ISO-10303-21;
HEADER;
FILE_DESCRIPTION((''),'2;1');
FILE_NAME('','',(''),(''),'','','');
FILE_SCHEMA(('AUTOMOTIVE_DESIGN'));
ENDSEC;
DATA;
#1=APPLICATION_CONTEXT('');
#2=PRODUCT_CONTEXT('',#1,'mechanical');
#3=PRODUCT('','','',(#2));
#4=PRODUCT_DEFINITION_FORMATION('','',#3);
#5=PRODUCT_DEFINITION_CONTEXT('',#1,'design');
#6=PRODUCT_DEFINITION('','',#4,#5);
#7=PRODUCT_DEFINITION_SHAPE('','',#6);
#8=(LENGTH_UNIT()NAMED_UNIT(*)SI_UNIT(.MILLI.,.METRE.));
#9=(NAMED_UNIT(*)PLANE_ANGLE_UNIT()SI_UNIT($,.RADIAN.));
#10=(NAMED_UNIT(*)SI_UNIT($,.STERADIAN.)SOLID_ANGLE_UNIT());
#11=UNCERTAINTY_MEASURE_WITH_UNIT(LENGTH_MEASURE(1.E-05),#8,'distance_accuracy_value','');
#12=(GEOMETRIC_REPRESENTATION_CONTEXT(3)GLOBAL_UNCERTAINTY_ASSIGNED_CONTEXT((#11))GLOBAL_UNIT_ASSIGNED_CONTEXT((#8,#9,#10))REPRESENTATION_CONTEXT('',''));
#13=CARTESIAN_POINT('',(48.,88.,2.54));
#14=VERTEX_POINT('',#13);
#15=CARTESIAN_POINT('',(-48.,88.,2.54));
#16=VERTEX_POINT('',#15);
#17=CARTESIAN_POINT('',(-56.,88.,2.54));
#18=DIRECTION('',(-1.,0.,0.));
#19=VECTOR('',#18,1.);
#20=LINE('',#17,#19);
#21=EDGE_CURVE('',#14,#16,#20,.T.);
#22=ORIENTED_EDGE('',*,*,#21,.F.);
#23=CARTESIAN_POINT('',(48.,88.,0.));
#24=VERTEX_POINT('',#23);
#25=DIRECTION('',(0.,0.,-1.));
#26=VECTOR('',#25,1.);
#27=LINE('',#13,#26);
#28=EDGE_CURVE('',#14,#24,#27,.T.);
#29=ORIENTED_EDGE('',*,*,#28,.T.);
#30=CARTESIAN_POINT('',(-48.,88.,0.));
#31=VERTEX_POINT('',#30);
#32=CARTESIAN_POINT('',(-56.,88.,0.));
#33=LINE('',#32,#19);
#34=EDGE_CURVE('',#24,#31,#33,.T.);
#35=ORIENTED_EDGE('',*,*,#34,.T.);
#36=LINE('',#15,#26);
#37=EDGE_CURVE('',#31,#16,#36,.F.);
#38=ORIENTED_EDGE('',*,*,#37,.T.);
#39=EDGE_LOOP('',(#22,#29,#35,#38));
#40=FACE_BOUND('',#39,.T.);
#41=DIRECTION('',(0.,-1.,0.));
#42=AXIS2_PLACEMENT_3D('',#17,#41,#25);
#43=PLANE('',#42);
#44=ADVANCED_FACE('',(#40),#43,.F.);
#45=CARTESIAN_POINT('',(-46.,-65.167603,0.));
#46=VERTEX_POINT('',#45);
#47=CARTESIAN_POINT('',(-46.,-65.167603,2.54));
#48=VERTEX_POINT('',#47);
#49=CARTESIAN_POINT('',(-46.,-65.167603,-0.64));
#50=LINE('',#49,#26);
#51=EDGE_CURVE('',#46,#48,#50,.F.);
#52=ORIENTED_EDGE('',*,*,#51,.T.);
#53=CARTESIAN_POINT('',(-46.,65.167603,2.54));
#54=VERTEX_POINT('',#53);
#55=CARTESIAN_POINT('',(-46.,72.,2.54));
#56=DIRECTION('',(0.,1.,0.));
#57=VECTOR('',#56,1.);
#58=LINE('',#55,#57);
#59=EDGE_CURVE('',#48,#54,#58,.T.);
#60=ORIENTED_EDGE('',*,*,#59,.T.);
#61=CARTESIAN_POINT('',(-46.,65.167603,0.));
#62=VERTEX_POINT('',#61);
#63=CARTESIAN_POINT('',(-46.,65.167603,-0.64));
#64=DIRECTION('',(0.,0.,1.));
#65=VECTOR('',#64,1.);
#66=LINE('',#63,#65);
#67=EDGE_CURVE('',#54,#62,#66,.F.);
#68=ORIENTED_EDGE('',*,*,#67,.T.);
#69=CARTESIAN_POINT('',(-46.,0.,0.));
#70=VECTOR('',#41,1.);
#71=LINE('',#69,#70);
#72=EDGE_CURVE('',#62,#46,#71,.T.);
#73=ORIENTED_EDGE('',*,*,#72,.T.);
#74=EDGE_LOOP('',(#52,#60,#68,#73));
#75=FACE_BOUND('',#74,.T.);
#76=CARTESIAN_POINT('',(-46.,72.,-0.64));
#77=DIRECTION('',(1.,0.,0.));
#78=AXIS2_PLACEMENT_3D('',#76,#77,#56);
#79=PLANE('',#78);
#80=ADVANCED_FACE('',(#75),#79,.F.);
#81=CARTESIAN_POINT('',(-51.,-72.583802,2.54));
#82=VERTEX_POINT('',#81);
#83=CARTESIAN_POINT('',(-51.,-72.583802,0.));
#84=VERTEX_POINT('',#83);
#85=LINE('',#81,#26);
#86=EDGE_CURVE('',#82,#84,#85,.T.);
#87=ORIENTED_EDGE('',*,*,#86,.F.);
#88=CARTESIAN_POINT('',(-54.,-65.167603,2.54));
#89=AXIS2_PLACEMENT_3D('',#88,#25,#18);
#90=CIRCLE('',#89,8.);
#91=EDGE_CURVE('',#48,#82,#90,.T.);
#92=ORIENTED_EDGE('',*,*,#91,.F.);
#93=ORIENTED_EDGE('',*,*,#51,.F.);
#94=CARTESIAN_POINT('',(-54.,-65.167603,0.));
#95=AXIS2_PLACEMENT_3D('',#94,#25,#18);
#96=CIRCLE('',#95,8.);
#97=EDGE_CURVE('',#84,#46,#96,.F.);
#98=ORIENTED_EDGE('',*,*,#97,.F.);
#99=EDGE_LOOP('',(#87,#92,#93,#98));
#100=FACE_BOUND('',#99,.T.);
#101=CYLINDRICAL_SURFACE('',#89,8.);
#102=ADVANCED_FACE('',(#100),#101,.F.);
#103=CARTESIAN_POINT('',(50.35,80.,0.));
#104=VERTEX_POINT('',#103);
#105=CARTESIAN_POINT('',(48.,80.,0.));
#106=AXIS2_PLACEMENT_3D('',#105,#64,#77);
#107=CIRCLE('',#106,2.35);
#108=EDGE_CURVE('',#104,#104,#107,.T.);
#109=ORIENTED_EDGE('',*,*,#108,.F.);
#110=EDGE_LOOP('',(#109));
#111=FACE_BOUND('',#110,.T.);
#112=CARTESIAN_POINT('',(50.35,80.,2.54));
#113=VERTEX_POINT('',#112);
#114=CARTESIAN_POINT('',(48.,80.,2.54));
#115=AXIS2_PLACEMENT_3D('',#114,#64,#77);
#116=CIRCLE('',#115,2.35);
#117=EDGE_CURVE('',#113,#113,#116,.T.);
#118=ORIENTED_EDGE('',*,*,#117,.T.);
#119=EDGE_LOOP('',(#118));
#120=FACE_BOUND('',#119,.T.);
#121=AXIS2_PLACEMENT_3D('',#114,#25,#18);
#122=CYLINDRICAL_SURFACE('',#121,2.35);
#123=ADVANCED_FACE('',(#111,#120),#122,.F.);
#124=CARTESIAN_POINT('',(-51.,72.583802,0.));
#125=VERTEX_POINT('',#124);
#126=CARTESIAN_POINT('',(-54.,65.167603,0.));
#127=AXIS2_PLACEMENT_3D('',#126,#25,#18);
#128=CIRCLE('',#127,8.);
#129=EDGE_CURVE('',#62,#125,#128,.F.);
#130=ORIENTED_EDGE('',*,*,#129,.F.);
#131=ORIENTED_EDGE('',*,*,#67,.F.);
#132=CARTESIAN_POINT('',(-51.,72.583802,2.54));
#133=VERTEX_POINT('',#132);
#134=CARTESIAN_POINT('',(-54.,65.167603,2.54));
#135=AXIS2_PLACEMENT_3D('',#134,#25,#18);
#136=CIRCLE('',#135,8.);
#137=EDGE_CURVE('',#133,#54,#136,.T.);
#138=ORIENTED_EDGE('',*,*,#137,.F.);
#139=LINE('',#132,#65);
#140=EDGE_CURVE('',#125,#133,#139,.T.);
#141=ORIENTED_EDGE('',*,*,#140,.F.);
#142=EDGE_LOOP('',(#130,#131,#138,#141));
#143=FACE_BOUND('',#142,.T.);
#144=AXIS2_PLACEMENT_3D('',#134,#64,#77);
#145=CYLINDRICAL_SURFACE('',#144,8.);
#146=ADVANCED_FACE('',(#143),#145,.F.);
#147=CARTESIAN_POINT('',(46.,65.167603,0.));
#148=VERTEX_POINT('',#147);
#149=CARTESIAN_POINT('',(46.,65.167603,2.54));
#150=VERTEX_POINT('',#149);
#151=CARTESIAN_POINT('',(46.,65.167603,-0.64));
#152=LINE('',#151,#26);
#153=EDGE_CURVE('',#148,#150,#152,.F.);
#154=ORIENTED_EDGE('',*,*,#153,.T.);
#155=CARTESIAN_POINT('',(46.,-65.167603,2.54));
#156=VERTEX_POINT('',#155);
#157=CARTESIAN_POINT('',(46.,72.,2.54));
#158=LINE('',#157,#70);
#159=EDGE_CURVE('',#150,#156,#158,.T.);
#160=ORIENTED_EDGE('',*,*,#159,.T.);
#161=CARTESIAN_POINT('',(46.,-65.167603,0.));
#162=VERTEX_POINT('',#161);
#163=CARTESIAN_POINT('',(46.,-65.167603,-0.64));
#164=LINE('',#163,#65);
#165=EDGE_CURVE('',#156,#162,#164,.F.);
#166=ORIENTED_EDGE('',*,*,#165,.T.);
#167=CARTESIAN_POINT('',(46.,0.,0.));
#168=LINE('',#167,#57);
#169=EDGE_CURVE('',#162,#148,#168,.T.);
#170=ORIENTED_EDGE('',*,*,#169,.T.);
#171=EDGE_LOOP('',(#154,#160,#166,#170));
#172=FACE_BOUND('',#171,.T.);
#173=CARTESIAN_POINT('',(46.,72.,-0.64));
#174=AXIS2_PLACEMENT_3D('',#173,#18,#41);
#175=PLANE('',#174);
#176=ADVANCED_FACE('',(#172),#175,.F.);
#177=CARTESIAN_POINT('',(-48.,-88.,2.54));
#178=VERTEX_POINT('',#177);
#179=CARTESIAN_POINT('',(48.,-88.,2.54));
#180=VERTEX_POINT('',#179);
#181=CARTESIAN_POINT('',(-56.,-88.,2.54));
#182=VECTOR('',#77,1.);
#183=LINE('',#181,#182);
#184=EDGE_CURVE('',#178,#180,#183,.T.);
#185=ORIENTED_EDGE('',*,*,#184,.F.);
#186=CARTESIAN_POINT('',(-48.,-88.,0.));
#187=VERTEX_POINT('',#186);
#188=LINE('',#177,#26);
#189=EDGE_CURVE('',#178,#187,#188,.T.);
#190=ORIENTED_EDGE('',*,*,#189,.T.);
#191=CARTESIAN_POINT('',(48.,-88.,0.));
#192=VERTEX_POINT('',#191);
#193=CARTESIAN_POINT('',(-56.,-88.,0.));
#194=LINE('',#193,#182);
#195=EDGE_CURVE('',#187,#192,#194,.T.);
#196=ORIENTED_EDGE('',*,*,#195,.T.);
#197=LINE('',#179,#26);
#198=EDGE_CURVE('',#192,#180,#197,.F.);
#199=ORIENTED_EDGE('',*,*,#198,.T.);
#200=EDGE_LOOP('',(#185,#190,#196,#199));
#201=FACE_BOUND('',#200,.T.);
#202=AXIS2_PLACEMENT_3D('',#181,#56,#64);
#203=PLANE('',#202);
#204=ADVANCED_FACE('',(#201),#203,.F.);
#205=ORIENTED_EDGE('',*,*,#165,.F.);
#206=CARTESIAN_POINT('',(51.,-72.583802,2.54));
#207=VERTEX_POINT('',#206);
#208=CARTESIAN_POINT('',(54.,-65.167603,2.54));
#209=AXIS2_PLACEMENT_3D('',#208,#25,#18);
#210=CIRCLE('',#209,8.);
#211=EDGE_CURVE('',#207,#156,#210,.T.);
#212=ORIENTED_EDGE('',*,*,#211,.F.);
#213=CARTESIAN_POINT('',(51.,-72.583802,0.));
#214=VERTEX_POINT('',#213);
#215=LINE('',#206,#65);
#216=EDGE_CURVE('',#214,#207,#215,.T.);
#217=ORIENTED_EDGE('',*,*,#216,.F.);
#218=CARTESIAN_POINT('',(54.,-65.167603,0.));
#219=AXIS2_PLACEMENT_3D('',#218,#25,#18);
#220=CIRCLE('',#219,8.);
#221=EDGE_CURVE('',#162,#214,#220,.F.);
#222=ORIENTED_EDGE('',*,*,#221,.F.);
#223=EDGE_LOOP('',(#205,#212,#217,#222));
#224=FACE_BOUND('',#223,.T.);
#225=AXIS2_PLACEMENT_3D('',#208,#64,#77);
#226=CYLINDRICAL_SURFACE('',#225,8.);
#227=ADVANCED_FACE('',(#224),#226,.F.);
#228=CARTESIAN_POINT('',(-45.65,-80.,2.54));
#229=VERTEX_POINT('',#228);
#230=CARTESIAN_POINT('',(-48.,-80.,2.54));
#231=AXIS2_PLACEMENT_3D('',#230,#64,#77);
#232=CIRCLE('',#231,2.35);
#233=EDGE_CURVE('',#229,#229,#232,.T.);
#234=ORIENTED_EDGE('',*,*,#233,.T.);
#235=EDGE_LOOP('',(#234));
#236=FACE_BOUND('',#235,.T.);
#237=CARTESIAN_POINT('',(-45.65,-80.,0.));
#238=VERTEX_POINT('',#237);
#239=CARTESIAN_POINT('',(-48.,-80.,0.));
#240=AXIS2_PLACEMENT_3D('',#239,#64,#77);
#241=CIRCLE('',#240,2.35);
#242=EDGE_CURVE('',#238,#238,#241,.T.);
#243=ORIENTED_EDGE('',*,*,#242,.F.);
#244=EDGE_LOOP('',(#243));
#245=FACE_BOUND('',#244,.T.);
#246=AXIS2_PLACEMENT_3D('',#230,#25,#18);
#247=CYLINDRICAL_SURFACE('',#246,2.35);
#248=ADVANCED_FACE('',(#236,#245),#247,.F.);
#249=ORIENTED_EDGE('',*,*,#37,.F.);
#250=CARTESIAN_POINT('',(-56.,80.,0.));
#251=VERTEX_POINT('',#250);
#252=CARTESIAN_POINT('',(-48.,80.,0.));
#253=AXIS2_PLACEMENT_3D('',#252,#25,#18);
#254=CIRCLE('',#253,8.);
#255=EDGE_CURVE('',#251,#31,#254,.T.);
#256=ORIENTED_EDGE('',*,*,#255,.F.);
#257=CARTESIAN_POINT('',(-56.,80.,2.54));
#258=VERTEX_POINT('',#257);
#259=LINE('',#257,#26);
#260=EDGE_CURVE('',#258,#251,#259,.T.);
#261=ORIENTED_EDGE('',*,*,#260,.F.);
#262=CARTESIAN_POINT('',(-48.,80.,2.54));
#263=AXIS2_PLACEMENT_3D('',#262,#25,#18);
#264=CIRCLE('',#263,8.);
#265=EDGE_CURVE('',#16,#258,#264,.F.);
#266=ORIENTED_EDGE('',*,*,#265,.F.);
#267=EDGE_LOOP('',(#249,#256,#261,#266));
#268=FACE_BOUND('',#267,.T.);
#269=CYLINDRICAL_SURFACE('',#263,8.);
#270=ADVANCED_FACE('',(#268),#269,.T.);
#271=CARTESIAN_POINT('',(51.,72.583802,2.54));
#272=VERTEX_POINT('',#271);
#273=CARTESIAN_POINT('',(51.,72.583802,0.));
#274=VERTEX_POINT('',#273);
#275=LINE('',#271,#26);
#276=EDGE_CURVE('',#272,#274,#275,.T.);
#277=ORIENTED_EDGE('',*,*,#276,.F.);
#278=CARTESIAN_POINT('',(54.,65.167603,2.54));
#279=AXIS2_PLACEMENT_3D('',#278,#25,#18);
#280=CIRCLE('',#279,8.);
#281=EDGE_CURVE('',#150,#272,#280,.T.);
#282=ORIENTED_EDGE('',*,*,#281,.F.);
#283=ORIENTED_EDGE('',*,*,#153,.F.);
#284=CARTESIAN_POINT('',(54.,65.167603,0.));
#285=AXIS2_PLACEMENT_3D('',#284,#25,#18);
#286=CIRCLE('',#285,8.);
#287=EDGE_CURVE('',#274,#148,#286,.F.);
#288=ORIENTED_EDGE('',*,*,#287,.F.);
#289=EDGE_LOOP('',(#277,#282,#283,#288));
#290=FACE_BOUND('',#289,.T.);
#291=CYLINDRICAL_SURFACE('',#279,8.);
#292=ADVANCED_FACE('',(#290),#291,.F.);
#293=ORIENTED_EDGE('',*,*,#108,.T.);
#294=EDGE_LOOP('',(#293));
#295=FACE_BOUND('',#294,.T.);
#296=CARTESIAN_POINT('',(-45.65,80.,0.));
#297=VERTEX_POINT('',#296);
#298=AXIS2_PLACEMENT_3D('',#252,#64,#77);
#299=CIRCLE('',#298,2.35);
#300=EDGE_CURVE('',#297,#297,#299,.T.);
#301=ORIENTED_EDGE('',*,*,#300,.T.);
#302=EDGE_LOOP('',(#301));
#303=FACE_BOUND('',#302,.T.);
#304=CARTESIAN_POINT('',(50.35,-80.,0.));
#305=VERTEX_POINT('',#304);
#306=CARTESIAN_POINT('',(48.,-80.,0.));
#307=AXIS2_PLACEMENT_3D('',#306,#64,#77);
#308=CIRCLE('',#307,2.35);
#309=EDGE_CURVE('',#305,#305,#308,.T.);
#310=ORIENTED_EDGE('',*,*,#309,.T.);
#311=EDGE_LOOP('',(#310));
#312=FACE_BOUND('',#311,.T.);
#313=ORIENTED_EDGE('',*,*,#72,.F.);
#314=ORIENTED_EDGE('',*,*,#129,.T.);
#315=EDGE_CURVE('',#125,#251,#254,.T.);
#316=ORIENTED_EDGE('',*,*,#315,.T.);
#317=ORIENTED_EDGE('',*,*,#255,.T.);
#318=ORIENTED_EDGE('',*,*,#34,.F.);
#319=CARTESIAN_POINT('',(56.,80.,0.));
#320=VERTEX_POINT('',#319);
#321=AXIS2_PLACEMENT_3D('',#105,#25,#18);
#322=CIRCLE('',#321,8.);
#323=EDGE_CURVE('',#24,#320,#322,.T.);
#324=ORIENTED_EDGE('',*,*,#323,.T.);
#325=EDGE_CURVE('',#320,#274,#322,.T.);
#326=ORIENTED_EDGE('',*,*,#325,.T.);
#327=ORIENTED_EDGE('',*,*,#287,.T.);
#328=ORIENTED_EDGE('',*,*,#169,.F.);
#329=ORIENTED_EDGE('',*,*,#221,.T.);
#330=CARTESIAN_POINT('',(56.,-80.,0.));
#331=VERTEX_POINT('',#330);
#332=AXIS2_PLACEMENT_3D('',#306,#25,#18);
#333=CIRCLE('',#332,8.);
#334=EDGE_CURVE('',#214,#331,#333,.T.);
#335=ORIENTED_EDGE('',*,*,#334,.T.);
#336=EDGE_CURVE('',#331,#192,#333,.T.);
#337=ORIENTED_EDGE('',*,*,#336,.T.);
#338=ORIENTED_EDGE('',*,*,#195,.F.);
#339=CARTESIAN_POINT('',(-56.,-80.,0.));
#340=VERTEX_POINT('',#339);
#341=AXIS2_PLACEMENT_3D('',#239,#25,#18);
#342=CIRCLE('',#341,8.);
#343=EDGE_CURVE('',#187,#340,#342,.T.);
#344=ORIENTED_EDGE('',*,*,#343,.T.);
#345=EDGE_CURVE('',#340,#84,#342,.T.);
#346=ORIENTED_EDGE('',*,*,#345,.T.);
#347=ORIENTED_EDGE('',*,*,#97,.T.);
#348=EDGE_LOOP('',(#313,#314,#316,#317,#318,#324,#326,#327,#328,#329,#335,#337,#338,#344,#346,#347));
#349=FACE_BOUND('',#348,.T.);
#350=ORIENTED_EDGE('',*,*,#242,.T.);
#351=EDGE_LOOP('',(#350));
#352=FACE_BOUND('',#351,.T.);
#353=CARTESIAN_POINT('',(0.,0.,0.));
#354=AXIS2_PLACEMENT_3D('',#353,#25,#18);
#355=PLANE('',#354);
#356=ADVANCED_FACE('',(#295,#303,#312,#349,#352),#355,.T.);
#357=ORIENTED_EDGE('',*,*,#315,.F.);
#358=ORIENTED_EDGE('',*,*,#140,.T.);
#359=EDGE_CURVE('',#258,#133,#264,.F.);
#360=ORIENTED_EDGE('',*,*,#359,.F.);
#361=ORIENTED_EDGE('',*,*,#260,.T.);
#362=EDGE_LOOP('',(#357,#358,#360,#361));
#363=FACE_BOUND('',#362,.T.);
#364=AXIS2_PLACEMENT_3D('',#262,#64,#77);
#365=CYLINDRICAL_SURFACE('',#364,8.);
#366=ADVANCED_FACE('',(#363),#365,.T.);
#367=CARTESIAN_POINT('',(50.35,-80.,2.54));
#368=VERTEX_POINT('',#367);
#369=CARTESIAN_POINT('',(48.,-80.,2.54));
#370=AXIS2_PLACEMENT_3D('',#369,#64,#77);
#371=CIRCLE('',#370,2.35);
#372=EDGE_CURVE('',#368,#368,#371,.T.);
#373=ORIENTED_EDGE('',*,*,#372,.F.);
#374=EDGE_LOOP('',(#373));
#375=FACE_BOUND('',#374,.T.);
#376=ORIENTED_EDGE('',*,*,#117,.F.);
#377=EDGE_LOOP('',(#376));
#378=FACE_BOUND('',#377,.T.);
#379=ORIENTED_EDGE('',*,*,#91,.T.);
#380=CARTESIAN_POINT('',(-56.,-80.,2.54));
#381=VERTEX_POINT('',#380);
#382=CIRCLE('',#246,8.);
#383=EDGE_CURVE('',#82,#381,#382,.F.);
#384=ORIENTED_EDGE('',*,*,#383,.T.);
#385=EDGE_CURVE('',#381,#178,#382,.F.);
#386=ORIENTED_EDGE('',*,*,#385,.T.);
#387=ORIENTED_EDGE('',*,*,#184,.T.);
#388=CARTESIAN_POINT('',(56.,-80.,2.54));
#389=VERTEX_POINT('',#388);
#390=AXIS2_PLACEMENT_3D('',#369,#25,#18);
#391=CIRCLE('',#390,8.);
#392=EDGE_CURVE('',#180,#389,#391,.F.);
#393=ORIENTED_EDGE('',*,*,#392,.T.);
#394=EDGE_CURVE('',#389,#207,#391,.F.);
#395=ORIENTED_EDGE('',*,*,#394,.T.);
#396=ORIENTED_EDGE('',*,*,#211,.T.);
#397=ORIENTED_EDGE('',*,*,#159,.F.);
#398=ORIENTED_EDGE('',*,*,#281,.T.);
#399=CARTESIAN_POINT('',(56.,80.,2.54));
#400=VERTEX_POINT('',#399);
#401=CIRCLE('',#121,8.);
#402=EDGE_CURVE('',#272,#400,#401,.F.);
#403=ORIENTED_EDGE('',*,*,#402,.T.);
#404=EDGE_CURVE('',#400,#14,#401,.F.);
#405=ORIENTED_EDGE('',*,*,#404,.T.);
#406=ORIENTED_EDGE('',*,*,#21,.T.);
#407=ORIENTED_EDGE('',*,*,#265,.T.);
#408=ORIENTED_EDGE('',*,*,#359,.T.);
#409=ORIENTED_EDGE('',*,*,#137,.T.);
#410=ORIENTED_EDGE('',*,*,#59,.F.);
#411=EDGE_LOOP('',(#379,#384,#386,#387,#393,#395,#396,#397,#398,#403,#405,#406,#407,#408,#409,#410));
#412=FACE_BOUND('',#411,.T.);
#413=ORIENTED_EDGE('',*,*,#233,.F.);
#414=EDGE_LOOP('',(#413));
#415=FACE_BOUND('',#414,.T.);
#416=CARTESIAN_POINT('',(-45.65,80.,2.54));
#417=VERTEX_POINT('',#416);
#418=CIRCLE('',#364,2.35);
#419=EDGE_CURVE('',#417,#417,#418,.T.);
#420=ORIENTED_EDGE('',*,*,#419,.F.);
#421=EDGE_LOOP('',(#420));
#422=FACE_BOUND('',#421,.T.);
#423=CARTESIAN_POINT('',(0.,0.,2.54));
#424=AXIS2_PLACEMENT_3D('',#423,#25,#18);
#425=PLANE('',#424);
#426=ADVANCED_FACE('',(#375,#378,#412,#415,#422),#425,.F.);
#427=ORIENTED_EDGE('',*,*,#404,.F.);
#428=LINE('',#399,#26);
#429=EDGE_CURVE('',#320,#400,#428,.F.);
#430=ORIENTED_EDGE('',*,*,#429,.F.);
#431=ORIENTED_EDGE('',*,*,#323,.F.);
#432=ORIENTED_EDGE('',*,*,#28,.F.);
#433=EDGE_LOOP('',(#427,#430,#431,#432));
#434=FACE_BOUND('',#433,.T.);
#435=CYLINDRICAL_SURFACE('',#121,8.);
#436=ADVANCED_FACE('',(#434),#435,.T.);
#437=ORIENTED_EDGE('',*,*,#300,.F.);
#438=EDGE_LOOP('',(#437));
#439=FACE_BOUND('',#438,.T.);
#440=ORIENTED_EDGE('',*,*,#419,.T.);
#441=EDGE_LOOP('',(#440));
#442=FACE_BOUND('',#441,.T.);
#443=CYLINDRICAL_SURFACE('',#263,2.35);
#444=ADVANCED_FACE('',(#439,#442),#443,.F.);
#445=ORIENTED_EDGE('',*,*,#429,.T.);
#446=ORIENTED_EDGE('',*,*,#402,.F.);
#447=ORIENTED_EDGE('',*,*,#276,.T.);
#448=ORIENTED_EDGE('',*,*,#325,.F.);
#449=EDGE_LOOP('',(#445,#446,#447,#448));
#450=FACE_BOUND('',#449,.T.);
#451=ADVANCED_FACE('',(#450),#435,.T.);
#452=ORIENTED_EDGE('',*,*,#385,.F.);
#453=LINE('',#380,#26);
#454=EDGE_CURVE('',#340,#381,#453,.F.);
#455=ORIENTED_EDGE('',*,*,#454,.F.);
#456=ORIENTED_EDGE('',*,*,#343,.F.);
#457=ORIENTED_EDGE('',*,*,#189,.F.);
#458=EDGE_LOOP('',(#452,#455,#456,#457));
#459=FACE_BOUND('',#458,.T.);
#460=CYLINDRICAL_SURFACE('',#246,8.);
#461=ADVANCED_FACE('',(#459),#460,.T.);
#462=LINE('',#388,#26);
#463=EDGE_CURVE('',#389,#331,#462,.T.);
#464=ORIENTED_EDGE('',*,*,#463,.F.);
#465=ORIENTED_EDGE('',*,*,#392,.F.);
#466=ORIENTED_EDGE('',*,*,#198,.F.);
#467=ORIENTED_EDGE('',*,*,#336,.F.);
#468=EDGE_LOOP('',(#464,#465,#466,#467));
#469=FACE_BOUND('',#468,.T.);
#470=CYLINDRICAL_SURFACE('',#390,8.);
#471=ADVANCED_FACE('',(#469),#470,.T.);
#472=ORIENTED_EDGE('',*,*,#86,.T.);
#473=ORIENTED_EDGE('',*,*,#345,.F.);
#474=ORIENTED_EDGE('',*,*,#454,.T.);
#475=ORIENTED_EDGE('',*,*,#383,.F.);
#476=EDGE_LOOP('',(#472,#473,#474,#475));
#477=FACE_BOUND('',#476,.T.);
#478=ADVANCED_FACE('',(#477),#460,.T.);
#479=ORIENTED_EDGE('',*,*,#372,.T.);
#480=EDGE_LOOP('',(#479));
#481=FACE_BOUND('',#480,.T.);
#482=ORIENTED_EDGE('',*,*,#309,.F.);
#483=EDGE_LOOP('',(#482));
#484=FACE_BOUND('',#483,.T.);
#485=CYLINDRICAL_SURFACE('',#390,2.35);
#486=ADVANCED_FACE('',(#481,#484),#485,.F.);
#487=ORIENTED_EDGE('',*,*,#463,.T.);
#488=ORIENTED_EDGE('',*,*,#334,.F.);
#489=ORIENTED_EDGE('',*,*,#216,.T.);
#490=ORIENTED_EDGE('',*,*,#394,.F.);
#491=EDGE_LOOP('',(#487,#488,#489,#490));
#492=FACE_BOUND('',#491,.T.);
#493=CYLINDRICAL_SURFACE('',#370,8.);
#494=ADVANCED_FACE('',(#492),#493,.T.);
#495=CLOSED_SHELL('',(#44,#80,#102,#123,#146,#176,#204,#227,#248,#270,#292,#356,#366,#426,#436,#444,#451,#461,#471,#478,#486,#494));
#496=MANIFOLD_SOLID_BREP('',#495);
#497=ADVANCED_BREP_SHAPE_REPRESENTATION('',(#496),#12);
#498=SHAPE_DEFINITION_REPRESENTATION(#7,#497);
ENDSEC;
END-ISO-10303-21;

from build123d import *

# Parameters (mm, degrees)
SKETCH1_W           = 112
SKETCH1_H           = 176
SKETCH1_R           = 2.35
BOSS_EXTRUDE1_DEPTH = 2.54
FILLET1_R           = 8
SKETCH2_W           = 10
SKETCH2_H           = 144
CUT_EXTRUDE1_DEPTH  = 3.18
FILLET2_R           = 8
FILLET3_R           = 8


with BuildPart() as part:
    # Sketch1 → Boss-Extrude1 (new body)
    with BuildSketch(Plane.XY):
        Rectangle(SKETCH1_W, SKETCH1_H)
        with Locations((-48, 80)):
            Circle(SKETCH1_R, mode=Mode.SUBTRACT)
        with Locations((48, 80)):
            Circle(SKETCH1_R, mode=Mode.SUBTRACT)
        with Locations((48, -80)):
            Circle(SKETCH1_R, mode=Mode.SUBTRACT)
        with Locations((-48, -80)):
            Circle(SKETCH1_R, mode=Mode.SUBTRACT)
    extrude(amount=BOSS_EXTRUDE1_DEPTH)

    # Fillet1
    fillet1_edges = [part.edges().sort_by_distance(p)[0] for p in [
        (56, -88, 1.27),
        (-56, -88, 1.27),
        (-56, 88, 1.27),
        (56, 88, 1.27),
    ]]
    fillet(fillet1_edges, radius=FILLET1_R)

    # Sketch2 → Cut-Extrude1 (cut)
    with BuildSketch(Plane.XY.offset(2.54)):
        with Locations((-51, 0)):
            Rectangle(SKETCH2_W, SKETCH2_H)
        with Locations((51, 0)):
            Rectangle(SKETCH2_W, SKETCH2_H)
    extrude(amount=-CUT_EXTRUDE1_DEPTH, mode=Mode.SUBTRACT)

    # Fillet2
    fillet2_edges = [part.edges().sort_by_distance(p)[0] for p in [
        (56, 72, 1.27),
        (56, -72, 1.27),
        (-56, -72, 1.27),
        (-56, 72, 1.27),
    ]]
    fillet(fillet2_edges, radius=FILLET2_R - 0.0001)  # a hair under: the kernel refuses the full size

    # Fillet3
    fillet3_edges = [part.edges().sort_by_distance(p)[0] for p in [
        (46, -72, 1.27),
        (46, 72, 1.27),
        (-46, 72, 1.27),
        (-46, -72, 1.27),
    ]]
    fillet(fillet3_edges, radius=FILLET3_R)


solid = part.part
